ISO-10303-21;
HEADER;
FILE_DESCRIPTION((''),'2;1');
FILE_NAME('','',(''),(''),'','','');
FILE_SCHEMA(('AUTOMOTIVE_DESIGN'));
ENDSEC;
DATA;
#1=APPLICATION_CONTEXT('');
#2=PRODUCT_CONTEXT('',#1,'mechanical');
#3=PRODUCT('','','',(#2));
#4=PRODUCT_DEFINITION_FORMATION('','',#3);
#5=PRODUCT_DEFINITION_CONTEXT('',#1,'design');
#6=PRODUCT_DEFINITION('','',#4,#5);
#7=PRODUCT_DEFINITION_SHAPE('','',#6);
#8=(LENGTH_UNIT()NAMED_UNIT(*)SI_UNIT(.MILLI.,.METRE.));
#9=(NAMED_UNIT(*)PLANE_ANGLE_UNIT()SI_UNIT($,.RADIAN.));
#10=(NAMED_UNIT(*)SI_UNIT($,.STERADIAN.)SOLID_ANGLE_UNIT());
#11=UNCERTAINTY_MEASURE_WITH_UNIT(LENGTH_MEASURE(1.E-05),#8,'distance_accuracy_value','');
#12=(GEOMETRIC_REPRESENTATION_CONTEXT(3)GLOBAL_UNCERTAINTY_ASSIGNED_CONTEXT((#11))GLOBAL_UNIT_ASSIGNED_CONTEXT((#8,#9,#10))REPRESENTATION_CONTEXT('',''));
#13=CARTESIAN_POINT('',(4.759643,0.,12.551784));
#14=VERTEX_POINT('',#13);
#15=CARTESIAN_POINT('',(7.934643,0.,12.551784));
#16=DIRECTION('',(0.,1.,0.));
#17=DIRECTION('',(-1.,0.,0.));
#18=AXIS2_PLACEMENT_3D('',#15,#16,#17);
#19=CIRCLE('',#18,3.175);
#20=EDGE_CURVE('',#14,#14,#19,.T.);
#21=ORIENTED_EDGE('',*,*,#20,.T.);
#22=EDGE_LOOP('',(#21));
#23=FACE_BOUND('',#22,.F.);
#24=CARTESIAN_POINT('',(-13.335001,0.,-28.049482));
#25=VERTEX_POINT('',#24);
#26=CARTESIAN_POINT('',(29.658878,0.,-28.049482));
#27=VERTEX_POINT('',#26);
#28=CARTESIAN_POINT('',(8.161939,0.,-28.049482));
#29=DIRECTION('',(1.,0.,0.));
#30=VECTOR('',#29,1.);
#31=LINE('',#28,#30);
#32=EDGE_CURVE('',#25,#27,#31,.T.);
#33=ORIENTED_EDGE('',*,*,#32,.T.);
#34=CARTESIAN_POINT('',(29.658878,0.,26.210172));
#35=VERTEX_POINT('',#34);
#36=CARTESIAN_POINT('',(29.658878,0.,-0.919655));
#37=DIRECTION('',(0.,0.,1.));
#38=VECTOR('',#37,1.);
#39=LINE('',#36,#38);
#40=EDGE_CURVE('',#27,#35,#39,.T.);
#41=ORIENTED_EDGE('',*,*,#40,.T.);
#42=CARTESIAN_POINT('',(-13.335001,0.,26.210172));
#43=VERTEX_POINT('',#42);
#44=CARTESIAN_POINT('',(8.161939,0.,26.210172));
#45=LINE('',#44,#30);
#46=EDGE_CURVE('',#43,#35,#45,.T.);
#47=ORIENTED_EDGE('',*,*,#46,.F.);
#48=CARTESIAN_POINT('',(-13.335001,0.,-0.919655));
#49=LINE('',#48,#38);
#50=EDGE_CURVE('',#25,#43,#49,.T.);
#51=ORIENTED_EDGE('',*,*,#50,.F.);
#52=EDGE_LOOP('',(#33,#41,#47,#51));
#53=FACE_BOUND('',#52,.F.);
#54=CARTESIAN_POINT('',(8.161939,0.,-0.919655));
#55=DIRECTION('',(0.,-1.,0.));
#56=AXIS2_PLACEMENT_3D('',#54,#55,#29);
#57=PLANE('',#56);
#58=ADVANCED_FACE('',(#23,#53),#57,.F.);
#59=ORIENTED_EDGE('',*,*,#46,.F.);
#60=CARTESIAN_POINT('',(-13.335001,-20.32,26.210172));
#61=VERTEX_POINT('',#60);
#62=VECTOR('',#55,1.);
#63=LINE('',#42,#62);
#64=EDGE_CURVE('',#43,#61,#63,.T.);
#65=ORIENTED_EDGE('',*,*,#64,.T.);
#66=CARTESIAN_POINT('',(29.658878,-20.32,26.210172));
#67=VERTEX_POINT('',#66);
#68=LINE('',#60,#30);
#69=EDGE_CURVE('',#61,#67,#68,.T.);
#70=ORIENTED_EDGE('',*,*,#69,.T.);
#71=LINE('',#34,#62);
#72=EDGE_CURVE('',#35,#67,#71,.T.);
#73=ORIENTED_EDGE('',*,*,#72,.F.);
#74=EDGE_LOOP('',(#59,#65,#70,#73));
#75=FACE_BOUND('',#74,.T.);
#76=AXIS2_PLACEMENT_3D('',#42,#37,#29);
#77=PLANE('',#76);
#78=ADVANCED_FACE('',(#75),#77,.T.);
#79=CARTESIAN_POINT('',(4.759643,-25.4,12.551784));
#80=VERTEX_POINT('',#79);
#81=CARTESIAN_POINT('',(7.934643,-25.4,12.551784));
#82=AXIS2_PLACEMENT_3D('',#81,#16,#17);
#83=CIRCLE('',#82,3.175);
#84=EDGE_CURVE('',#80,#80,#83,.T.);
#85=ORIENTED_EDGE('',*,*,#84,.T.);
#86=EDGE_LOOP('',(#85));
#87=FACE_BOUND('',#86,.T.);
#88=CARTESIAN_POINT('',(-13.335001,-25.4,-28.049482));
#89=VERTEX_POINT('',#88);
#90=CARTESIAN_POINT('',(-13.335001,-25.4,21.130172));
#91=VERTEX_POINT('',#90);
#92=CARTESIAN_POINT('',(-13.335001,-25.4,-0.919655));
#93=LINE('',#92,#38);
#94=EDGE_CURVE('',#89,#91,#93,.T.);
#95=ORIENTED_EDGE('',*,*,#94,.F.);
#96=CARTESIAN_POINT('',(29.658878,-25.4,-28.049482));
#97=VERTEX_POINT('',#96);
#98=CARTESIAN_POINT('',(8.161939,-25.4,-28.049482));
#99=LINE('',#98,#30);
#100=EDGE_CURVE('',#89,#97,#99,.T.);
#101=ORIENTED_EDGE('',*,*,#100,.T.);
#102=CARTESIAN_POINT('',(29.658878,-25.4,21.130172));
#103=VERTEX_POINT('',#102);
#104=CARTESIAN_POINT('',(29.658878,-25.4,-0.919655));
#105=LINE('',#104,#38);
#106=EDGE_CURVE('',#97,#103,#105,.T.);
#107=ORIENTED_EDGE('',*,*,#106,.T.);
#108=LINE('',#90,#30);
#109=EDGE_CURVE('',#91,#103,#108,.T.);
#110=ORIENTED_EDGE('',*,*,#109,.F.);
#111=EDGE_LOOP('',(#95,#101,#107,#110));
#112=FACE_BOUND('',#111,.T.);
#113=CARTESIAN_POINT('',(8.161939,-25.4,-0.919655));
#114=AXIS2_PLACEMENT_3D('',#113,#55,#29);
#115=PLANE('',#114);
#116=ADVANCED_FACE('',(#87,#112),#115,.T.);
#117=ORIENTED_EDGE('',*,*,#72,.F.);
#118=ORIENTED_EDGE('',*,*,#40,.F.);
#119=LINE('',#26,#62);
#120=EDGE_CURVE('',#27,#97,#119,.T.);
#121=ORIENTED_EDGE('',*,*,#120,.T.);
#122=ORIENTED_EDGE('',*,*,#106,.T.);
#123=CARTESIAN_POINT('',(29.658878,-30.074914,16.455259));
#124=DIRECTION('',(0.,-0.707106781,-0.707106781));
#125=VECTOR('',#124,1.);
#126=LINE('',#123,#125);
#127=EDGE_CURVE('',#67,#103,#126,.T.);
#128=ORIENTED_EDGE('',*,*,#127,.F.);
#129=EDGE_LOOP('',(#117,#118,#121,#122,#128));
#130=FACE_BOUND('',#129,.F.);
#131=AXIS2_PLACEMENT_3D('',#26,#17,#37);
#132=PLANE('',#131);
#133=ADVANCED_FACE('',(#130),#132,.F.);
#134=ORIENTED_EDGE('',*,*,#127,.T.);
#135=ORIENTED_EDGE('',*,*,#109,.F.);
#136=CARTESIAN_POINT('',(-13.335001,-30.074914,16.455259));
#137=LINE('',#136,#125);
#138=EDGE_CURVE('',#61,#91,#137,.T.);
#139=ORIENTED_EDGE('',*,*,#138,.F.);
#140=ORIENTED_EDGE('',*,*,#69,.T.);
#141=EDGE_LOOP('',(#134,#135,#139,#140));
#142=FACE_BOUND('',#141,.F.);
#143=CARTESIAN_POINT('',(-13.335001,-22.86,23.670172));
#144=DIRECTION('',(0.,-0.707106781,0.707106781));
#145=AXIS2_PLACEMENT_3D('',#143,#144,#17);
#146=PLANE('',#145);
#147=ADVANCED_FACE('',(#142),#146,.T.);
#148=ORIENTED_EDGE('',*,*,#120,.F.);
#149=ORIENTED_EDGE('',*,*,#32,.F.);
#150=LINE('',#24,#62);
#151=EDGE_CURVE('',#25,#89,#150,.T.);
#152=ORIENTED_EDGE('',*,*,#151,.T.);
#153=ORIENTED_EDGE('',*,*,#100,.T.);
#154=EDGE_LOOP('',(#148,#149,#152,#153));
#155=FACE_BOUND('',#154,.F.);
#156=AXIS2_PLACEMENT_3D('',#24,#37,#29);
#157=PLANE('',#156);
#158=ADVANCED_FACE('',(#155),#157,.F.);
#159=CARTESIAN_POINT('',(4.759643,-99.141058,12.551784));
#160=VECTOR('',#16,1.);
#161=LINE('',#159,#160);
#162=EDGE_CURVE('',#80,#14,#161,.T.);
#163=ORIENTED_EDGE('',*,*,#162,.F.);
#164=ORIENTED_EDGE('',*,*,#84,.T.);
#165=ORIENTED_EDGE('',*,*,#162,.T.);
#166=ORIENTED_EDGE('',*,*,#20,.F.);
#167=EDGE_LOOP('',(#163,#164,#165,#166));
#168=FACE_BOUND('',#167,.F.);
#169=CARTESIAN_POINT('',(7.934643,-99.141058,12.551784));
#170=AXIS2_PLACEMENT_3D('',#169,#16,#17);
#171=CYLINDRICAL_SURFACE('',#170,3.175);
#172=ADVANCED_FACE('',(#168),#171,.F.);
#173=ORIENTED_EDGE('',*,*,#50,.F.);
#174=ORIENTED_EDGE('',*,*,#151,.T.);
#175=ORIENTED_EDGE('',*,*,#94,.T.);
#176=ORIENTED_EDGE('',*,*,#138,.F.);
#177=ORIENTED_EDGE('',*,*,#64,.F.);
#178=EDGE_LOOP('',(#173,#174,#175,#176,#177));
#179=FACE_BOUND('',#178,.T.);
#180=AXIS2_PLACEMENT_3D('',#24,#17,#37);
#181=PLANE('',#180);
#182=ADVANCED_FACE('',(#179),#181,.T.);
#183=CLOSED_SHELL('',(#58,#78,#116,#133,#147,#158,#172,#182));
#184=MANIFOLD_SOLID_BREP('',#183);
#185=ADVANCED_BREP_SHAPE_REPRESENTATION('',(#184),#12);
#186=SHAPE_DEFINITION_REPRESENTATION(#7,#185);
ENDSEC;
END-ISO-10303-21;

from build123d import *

# Parameters (mm, degrees)
F0_W     = 42.9938789457
F0_H     = 54.2596541345
F1_DEPTH = 25.4
F3_D     = 6.35
F6_SIZE  = 5.08


# Not quite as in the source:
# - the program builds the solid bodies; features that only make, move or delete a surface that nothing else refers to are left out


with BuildPart() as f1:
    # F0 (on Front) → F1 (new body)
    with BuildSketch(Plane.XZ):
        with Locations((8.1619387493, -0.9196549654)):
            Rectangle(F0_W, F0_H)
    extrude(amount=F1_DEPTH)

    # F3 (through all)
    with Locations(Plane.XZ.offset(25.4)):
        with Locations((7.9346429557, 12.5517835841)):
            Hole(F3_D / 2)

    # F6
    f6_edges = [f1.edges().sort_by_distance(p)[0] for p in [
        (8.161939, -25.4, 26.210172),
    ]]
    chamfer(f6_edges, length=F6_SIZE)


solid = f1.part
